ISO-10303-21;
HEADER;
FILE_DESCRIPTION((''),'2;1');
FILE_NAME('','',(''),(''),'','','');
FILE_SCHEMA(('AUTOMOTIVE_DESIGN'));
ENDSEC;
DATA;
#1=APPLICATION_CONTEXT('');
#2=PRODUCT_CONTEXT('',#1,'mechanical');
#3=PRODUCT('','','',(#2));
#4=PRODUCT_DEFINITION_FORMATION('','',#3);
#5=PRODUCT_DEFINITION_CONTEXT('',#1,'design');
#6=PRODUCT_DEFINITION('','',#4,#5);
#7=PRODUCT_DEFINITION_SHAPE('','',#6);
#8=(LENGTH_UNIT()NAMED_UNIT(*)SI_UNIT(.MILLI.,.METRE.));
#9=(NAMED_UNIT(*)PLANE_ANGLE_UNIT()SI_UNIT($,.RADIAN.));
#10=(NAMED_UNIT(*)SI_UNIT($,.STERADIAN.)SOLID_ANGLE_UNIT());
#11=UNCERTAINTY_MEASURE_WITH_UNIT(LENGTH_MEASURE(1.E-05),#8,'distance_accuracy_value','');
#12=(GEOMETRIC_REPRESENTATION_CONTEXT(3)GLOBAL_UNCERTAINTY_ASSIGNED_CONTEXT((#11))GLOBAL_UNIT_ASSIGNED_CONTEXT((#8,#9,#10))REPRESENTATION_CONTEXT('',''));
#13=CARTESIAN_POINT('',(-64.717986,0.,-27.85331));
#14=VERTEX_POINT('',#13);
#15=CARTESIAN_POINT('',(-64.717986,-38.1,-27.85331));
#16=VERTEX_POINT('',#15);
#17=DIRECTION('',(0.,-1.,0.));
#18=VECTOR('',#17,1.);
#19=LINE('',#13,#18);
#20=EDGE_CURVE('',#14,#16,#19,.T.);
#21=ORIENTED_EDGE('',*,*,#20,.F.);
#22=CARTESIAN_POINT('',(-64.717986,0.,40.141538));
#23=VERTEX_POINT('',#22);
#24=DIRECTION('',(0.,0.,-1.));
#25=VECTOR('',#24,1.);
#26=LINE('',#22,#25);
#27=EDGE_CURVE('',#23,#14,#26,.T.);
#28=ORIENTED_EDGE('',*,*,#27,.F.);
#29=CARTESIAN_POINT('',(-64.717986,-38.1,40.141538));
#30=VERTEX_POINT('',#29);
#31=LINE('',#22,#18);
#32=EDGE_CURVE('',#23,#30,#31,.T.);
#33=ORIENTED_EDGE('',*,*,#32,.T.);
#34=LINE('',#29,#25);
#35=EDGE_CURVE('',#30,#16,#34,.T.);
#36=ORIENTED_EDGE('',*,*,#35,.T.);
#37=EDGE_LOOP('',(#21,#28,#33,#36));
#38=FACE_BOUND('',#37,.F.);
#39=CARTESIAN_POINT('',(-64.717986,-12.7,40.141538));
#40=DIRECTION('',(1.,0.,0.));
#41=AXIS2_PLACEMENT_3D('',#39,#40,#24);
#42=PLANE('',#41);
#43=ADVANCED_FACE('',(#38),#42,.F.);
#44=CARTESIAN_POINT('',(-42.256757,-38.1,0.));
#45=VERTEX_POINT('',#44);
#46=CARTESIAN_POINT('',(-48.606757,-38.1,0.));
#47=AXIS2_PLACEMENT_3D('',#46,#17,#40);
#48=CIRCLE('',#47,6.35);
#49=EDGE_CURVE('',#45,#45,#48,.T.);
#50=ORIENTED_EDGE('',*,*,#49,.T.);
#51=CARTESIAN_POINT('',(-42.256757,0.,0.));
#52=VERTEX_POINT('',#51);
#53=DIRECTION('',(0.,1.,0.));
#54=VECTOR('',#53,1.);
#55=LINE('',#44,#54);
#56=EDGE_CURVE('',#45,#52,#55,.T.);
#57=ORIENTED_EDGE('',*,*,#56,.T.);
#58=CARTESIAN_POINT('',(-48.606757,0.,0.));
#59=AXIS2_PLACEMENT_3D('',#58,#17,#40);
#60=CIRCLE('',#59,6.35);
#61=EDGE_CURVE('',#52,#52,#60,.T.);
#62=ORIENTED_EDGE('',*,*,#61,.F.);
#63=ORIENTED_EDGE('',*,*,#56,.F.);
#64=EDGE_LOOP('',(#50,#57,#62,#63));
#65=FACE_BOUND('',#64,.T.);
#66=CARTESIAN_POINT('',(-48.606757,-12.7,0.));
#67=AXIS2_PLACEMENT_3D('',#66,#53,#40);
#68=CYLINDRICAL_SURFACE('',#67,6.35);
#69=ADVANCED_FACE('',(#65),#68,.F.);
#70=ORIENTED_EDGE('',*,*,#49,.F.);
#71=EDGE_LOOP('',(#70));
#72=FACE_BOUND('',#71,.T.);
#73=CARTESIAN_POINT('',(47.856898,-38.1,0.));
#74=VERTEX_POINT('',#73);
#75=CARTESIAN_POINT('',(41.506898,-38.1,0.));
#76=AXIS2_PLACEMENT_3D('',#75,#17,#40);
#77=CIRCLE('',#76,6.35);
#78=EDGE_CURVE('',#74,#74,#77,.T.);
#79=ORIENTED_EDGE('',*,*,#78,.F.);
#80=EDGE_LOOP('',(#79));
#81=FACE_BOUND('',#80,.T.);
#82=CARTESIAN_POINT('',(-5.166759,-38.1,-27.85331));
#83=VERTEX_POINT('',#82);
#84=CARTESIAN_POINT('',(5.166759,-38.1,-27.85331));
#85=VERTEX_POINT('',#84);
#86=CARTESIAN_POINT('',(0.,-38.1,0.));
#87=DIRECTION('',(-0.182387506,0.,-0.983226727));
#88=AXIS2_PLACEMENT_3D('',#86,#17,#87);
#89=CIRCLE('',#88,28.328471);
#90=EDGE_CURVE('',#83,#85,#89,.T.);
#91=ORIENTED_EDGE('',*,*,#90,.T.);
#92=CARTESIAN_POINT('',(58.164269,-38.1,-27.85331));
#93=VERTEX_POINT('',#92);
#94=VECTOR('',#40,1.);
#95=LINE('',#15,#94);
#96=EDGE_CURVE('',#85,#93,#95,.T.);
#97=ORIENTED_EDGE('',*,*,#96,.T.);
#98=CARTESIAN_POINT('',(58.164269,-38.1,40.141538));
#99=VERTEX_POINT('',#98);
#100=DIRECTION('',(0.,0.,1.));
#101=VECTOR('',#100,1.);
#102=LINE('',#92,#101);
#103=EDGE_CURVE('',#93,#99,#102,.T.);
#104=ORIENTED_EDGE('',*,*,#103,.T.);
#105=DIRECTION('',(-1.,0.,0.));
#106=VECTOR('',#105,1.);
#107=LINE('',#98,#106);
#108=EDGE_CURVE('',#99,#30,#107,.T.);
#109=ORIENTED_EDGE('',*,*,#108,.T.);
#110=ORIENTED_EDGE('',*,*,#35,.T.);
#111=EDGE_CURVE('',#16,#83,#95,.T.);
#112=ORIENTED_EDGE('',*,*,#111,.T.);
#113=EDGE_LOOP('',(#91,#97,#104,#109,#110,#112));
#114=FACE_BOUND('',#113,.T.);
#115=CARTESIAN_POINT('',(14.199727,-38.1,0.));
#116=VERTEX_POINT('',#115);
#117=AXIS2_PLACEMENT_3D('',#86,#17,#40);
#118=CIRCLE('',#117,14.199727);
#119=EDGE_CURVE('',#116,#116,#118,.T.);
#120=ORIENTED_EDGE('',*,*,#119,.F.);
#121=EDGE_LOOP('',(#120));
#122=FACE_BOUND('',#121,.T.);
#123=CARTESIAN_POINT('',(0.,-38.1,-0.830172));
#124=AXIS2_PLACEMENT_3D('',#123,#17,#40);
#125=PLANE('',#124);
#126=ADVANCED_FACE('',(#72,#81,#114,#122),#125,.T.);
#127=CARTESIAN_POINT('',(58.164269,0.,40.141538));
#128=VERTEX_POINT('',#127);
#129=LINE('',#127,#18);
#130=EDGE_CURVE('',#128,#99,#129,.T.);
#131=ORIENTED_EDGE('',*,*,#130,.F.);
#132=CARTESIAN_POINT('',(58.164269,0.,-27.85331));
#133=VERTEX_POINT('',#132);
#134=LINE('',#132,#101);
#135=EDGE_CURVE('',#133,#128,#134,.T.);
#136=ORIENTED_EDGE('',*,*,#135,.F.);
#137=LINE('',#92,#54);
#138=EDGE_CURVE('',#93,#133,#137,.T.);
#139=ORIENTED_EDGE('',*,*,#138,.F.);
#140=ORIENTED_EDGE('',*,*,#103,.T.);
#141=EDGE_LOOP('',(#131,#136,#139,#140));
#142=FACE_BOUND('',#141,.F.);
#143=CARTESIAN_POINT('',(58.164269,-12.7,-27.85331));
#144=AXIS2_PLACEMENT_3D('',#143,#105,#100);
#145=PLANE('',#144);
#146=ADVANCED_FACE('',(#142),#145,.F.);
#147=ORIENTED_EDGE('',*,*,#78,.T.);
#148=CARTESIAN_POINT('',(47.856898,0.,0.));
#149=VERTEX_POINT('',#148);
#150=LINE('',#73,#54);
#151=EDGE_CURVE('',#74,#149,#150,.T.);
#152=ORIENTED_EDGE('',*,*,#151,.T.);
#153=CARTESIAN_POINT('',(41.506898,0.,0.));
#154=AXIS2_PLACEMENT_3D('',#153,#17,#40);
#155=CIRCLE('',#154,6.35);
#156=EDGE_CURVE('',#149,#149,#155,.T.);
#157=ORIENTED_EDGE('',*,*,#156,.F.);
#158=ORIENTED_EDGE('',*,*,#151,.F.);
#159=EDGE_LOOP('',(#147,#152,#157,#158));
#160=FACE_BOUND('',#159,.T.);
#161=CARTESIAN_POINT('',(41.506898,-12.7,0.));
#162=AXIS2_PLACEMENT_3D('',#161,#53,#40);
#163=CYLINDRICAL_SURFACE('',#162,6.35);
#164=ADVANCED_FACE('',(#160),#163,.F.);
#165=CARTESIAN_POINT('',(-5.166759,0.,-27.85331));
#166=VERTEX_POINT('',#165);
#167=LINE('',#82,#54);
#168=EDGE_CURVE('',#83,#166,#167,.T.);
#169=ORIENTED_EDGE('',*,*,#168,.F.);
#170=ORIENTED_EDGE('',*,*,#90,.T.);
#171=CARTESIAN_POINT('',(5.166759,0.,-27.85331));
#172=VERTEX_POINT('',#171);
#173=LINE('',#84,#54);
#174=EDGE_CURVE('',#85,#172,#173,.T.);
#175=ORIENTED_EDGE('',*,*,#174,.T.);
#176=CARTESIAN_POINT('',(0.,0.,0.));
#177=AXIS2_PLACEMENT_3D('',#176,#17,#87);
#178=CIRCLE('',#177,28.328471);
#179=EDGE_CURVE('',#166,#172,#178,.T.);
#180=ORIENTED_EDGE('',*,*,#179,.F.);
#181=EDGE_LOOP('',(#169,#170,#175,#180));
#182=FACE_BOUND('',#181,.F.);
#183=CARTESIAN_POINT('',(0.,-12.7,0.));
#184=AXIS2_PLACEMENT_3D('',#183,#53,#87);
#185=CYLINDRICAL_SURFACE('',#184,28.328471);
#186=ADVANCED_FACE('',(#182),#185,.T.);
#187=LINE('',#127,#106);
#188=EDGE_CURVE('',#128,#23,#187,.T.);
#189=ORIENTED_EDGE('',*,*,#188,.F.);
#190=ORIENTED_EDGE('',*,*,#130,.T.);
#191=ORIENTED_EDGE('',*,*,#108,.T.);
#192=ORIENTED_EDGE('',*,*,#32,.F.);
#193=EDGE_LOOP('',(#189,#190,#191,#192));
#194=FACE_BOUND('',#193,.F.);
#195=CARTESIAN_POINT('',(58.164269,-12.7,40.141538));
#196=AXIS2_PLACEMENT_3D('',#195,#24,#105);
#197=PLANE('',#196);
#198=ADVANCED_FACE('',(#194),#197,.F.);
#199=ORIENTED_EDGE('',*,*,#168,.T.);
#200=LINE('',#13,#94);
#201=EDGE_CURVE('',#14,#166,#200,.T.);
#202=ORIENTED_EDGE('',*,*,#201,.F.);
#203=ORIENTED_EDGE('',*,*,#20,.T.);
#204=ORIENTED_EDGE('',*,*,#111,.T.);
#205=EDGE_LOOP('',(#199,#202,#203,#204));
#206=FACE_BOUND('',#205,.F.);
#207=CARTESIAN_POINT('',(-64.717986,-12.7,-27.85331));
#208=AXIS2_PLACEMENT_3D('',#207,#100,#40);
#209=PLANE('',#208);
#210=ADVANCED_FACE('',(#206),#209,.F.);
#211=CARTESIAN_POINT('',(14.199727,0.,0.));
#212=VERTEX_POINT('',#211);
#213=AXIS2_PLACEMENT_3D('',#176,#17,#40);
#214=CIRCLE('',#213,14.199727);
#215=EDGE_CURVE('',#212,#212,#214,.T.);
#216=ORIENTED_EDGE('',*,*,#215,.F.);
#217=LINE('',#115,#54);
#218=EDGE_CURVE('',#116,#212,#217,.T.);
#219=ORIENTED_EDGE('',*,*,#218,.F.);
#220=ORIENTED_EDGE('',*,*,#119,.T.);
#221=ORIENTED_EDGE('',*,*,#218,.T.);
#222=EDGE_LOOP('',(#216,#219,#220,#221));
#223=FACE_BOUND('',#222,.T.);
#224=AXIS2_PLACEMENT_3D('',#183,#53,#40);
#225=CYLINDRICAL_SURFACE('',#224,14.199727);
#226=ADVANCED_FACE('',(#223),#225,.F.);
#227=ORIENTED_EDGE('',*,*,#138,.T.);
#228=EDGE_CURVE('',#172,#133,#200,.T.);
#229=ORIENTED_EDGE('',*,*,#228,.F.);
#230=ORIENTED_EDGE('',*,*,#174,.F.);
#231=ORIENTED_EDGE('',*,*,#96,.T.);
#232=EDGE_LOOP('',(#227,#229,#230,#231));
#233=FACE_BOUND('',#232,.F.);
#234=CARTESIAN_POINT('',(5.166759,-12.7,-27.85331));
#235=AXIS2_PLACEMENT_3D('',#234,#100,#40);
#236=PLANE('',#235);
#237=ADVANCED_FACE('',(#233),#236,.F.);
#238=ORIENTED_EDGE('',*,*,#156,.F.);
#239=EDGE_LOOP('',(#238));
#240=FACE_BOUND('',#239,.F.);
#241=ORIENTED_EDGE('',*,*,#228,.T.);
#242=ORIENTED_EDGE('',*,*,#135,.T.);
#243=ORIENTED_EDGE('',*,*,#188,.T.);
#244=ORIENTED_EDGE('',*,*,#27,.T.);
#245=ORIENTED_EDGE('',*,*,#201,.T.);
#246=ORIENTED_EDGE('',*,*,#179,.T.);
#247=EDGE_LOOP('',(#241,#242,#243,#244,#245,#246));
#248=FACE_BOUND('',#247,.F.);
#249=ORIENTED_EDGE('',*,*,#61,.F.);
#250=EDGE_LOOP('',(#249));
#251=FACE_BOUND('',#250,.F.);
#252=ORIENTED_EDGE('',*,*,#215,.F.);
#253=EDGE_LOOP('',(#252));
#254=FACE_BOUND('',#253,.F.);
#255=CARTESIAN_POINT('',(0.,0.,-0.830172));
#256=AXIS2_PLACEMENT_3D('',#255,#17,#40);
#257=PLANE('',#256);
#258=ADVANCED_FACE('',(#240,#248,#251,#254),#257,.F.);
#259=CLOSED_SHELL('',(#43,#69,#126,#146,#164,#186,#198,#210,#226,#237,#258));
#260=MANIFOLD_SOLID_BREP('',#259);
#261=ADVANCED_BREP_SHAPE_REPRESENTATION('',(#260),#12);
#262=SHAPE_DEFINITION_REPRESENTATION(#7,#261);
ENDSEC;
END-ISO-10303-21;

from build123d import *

# Parameters (mm, degrees)
F0_R     = 14.1997272149
F0_R_2   = 6.35
F2_DEPTH = 12.7
F3_DEPTH = 25.4


# Not quite as in the source:
# - the program builds the solid bodies; features that only make, move or delete a surface that nothing else refers to are left out


with BuildPart() as f2:
    # F0 (on Front) → F2 (new body)
    with BuildSketch(Plane.XZ):
        with BuildLine():
            ThreePointArc((5.1667592351, -27.8533101082), (21.7815136707, -18.1126460571), (28.3284712785, 0))
            ThreePointArc((28.3284712785, 0), (-18.1126460571, 21.7815136707), (-5.1667592351, -27.8533101082))
            Line((-5.1667592351, -27.8533101082), (5.1667592351, -27.8533101082))
        make_face()
        Circle(F0_R, mode=Mode.SUBTRACT)
        with BuildLine():
            ThreePointArc((-5.1667592351, -27.8533101082), (-18.1126460571, 21.7815136707), (28.3284712785, 0))
            ThreePointArc((28.3284712785, 0), (21.7815136707, -18.1126460571), (5.1667592351, -27.8533101082))
            Line((5.1667592351, -27.8533101082), (58.1642687321, -27.8533101082))
            Line((58.1642687321, -27.8533101082), (58.1642687321, 40.1415377855))
            Line((58.1642687321, 40.1415377855), (-64.7179856896, 40.1415377855))
            Line((-64.7179856896, 40.1415377855), (-64.7179856896, -27.8533101082))
            Line((-64.7179856896, -27.8533101082), (-5.1667592351, -27.8533101082))
        make_face()
        with Locations((-48.6067570746, 0)):
            Circle(F0_R_2, mode=Mode.SUBTRACT)
        with Locations((41.5068976581, 0)):
            Circle(F0_R_2, mode=Mode.SUBTRACT)
        with BuildLine():
            Line((5.1667592351, -27.8533101082), (-5.1667592351, -27.8533101082))
            ThreePointArc((-5.1667592351, -27.8533101082), (0, -28.3284712785), (5.1667592351, -27.8533101082))
        make_face()
    extrude(amount=F2_DEPTH)

    # F3 (add): a face of the model
    f3_faces = [f2.faces().sort_by_distance(p)[0] for p in [
        (56.7575636957, -12.7, 6.1441138387),
    ]]
    extrude(f3_faces, amount=F3_DEPTH)


solid = f2.part
